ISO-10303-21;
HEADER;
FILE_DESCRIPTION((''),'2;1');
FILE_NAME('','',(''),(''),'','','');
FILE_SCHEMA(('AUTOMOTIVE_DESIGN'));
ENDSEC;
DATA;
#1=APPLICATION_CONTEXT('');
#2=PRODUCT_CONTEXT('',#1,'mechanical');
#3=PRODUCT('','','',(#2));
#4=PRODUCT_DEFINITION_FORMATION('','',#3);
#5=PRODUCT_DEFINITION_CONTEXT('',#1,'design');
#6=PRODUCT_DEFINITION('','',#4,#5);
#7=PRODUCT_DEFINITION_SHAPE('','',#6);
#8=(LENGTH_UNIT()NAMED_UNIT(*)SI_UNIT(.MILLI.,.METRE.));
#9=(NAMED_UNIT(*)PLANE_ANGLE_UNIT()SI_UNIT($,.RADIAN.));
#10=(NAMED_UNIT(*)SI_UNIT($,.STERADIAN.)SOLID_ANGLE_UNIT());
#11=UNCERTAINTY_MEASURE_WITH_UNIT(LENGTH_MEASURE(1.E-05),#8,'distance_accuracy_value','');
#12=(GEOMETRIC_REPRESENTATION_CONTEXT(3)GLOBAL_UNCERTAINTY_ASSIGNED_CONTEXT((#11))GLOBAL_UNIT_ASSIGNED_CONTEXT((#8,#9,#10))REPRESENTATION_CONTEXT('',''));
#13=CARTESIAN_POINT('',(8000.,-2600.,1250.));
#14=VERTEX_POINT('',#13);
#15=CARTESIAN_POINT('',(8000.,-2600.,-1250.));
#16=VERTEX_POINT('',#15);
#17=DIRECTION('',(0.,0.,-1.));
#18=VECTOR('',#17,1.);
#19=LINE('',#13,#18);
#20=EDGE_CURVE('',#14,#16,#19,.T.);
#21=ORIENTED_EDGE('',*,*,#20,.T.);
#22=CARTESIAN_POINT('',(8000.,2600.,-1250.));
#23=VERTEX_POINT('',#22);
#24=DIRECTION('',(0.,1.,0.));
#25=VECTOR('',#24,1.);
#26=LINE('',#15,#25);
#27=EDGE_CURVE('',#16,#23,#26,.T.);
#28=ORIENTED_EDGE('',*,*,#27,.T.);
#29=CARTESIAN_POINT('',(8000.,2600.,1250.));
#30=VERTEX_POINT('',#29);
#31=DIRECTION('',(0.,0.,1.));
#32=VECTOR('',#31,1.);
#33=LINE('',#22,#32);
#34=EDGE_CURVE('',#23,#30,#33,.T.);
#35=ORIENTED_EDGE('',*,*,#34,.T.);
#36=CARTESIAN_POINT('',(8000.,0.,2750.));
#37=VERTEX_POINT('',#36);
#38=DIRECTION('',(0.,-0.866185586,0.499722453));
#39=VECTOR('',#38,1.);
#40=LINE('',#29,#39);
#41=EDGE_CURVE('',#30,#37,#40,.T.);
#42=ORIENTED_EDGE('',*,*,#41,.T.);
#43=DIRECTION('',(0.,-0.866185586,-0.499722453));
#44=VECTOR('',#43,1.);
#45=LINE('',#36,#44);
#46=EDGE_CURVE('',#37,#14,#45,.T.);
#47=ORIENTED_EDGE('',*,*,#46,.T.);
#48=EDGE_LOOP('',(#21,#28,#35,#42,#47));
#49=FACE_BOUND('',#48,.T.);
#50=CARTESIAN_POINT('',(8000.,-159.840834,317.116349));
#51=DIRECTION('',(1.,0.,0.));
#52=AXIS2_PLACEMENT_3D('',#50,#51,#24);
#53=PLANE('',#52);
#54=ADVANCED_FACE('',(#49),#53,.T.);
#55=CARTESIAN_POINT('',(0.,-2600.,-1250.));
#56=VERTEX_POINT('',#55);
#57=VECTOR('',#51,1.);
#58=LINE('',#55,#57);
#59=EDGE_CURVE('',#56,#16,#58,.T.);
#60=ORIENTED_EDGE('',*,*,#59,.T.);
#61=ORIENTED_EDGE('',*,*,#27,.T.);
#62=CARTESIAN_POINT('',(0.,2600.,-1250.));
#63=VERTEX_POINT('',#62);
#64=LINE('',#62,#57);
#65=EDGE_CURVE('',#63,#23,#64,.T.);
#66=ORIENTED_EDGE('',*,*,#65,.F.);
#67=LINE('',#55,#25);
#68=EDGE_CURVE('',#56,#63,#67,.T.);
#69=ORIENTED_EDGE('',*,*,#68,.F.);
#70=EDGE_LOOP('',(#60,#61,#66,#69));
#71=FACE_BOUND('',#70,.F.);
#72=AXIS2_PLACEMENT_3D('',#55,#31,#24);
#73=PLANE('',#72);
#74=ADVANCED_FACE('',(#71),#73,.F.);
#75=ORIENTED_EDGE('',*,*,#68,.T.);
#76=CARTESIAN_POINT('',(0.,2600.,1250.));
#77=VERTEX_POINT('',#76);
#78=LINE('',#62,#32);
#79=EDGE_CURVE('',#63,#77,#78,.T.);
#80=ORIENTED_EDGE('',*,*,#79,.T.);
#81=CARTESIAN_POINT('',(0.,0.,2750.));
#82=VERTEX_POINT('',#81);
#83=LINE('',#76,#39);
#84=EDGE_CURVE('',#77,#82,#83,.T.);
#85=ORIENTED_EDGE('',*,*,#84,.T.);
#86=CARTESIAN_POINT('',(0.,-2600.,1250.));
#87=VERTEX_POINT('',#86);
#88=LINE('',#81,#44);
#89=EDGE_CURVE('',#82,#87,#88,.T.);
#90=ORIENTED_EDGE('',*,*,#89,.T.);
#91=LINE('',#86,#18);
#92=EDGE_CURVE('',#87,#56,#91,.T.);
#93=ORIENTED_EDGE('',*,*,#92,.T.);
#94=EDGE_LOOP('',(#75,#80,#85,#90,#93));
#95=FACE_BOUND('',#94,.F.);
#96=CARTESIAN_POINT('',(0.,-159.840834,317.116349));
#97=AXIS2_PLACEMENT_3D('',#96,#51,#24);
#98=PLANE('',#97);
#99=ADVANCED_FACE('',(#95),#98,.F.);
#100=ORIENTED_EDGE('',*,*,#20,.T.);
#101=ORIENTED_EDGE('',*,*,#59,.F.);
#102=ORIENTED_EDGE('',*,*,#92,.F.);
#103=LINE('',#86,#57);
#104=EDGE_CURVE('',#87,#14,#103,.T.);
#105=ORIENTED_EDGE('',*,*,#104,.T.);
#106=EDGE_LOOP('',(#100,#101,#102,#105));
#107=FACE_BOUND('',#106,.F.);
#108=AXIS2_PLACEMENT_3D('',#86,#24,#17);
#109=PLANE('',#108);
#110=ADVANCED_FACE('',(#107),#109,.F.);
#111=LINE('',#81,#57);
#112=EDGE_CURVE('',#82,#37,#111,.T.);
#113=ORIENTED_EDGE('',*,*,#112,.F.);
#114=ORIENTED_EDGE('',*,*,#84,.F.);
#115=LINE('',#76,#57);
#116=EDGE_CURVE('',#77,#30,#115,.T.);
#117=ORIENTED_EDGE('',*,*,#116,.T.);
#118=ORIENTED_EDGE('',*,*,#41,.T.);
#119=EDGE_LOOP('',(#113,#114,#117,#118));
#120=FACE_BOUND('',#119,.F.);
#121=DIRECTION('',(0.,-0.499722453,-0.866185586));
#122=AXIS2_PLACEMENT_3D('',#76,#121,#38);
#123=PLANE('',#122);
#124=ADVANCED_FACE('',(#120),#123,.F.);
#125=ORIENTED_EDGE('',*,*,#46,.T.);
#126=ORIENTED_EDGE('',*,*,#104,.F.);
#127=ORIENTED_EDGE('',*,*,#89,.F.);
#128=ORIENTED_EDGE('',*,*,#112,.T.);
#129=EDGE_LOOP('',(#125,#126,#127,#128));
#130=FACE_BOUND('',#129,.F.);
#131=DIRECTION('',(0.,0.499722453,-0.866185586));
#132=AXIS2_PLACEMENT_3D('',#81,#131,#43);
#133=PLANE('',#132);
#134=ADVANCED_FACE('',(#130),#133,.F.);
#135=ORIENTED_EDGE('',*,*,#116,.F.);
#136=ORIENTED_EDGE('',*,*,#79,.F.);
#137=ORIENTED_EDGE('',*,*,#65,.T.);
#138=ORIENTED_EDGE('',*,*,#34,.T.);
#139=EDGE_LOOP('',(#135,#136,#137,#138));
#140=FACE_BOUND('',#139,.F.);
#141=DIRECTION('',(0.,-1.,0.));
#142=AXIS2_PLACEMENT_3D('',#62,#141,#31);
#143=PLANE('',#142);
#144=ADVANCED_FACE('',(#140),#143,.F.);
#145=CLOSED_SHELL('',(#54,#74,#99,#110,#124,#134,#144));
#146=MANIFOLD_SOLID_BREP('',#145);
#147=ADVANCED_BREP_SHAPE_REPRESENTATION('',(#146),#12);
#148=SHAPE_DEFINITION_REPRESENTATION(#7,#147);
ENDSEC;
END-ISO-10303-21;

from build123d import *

# Parameters (mm, degrees)
F0_W     = 1250
F0_H     = 900
F0_W_2   = 900
F0_H_2   = 2055
F1_DEPTH = 8000


# Not quite as in the source:
# - the program builds the solid bodies; features that only make, move or delete a surface that nothing else refers to are left out


with BuildPart() as f1:
    # F0 (on Right) → F1 (new body)
    with BuildSketch(Plane.YZ):
        Polygon((-340, -1250), (2600, -1250), (2600, 1250), (0, 2750), (-2600, 1250), (-2600, -1250), (-1240, -1250), (-1240, 805), (-340, 805), align=None)
        with Locations((1175, 355)):
            Rectangle(F0_W, F0_H, mode=Mode.SUBTRACT)
        with Locations((-790, -222.5)):
            Rectangle(F0_W_2, F0_H_2)
        with Locations((1175, 355)):
            Rectangle(F0_W, F0_H)
    extrude(amount=F1_DEPTH)


solid = f1.part
